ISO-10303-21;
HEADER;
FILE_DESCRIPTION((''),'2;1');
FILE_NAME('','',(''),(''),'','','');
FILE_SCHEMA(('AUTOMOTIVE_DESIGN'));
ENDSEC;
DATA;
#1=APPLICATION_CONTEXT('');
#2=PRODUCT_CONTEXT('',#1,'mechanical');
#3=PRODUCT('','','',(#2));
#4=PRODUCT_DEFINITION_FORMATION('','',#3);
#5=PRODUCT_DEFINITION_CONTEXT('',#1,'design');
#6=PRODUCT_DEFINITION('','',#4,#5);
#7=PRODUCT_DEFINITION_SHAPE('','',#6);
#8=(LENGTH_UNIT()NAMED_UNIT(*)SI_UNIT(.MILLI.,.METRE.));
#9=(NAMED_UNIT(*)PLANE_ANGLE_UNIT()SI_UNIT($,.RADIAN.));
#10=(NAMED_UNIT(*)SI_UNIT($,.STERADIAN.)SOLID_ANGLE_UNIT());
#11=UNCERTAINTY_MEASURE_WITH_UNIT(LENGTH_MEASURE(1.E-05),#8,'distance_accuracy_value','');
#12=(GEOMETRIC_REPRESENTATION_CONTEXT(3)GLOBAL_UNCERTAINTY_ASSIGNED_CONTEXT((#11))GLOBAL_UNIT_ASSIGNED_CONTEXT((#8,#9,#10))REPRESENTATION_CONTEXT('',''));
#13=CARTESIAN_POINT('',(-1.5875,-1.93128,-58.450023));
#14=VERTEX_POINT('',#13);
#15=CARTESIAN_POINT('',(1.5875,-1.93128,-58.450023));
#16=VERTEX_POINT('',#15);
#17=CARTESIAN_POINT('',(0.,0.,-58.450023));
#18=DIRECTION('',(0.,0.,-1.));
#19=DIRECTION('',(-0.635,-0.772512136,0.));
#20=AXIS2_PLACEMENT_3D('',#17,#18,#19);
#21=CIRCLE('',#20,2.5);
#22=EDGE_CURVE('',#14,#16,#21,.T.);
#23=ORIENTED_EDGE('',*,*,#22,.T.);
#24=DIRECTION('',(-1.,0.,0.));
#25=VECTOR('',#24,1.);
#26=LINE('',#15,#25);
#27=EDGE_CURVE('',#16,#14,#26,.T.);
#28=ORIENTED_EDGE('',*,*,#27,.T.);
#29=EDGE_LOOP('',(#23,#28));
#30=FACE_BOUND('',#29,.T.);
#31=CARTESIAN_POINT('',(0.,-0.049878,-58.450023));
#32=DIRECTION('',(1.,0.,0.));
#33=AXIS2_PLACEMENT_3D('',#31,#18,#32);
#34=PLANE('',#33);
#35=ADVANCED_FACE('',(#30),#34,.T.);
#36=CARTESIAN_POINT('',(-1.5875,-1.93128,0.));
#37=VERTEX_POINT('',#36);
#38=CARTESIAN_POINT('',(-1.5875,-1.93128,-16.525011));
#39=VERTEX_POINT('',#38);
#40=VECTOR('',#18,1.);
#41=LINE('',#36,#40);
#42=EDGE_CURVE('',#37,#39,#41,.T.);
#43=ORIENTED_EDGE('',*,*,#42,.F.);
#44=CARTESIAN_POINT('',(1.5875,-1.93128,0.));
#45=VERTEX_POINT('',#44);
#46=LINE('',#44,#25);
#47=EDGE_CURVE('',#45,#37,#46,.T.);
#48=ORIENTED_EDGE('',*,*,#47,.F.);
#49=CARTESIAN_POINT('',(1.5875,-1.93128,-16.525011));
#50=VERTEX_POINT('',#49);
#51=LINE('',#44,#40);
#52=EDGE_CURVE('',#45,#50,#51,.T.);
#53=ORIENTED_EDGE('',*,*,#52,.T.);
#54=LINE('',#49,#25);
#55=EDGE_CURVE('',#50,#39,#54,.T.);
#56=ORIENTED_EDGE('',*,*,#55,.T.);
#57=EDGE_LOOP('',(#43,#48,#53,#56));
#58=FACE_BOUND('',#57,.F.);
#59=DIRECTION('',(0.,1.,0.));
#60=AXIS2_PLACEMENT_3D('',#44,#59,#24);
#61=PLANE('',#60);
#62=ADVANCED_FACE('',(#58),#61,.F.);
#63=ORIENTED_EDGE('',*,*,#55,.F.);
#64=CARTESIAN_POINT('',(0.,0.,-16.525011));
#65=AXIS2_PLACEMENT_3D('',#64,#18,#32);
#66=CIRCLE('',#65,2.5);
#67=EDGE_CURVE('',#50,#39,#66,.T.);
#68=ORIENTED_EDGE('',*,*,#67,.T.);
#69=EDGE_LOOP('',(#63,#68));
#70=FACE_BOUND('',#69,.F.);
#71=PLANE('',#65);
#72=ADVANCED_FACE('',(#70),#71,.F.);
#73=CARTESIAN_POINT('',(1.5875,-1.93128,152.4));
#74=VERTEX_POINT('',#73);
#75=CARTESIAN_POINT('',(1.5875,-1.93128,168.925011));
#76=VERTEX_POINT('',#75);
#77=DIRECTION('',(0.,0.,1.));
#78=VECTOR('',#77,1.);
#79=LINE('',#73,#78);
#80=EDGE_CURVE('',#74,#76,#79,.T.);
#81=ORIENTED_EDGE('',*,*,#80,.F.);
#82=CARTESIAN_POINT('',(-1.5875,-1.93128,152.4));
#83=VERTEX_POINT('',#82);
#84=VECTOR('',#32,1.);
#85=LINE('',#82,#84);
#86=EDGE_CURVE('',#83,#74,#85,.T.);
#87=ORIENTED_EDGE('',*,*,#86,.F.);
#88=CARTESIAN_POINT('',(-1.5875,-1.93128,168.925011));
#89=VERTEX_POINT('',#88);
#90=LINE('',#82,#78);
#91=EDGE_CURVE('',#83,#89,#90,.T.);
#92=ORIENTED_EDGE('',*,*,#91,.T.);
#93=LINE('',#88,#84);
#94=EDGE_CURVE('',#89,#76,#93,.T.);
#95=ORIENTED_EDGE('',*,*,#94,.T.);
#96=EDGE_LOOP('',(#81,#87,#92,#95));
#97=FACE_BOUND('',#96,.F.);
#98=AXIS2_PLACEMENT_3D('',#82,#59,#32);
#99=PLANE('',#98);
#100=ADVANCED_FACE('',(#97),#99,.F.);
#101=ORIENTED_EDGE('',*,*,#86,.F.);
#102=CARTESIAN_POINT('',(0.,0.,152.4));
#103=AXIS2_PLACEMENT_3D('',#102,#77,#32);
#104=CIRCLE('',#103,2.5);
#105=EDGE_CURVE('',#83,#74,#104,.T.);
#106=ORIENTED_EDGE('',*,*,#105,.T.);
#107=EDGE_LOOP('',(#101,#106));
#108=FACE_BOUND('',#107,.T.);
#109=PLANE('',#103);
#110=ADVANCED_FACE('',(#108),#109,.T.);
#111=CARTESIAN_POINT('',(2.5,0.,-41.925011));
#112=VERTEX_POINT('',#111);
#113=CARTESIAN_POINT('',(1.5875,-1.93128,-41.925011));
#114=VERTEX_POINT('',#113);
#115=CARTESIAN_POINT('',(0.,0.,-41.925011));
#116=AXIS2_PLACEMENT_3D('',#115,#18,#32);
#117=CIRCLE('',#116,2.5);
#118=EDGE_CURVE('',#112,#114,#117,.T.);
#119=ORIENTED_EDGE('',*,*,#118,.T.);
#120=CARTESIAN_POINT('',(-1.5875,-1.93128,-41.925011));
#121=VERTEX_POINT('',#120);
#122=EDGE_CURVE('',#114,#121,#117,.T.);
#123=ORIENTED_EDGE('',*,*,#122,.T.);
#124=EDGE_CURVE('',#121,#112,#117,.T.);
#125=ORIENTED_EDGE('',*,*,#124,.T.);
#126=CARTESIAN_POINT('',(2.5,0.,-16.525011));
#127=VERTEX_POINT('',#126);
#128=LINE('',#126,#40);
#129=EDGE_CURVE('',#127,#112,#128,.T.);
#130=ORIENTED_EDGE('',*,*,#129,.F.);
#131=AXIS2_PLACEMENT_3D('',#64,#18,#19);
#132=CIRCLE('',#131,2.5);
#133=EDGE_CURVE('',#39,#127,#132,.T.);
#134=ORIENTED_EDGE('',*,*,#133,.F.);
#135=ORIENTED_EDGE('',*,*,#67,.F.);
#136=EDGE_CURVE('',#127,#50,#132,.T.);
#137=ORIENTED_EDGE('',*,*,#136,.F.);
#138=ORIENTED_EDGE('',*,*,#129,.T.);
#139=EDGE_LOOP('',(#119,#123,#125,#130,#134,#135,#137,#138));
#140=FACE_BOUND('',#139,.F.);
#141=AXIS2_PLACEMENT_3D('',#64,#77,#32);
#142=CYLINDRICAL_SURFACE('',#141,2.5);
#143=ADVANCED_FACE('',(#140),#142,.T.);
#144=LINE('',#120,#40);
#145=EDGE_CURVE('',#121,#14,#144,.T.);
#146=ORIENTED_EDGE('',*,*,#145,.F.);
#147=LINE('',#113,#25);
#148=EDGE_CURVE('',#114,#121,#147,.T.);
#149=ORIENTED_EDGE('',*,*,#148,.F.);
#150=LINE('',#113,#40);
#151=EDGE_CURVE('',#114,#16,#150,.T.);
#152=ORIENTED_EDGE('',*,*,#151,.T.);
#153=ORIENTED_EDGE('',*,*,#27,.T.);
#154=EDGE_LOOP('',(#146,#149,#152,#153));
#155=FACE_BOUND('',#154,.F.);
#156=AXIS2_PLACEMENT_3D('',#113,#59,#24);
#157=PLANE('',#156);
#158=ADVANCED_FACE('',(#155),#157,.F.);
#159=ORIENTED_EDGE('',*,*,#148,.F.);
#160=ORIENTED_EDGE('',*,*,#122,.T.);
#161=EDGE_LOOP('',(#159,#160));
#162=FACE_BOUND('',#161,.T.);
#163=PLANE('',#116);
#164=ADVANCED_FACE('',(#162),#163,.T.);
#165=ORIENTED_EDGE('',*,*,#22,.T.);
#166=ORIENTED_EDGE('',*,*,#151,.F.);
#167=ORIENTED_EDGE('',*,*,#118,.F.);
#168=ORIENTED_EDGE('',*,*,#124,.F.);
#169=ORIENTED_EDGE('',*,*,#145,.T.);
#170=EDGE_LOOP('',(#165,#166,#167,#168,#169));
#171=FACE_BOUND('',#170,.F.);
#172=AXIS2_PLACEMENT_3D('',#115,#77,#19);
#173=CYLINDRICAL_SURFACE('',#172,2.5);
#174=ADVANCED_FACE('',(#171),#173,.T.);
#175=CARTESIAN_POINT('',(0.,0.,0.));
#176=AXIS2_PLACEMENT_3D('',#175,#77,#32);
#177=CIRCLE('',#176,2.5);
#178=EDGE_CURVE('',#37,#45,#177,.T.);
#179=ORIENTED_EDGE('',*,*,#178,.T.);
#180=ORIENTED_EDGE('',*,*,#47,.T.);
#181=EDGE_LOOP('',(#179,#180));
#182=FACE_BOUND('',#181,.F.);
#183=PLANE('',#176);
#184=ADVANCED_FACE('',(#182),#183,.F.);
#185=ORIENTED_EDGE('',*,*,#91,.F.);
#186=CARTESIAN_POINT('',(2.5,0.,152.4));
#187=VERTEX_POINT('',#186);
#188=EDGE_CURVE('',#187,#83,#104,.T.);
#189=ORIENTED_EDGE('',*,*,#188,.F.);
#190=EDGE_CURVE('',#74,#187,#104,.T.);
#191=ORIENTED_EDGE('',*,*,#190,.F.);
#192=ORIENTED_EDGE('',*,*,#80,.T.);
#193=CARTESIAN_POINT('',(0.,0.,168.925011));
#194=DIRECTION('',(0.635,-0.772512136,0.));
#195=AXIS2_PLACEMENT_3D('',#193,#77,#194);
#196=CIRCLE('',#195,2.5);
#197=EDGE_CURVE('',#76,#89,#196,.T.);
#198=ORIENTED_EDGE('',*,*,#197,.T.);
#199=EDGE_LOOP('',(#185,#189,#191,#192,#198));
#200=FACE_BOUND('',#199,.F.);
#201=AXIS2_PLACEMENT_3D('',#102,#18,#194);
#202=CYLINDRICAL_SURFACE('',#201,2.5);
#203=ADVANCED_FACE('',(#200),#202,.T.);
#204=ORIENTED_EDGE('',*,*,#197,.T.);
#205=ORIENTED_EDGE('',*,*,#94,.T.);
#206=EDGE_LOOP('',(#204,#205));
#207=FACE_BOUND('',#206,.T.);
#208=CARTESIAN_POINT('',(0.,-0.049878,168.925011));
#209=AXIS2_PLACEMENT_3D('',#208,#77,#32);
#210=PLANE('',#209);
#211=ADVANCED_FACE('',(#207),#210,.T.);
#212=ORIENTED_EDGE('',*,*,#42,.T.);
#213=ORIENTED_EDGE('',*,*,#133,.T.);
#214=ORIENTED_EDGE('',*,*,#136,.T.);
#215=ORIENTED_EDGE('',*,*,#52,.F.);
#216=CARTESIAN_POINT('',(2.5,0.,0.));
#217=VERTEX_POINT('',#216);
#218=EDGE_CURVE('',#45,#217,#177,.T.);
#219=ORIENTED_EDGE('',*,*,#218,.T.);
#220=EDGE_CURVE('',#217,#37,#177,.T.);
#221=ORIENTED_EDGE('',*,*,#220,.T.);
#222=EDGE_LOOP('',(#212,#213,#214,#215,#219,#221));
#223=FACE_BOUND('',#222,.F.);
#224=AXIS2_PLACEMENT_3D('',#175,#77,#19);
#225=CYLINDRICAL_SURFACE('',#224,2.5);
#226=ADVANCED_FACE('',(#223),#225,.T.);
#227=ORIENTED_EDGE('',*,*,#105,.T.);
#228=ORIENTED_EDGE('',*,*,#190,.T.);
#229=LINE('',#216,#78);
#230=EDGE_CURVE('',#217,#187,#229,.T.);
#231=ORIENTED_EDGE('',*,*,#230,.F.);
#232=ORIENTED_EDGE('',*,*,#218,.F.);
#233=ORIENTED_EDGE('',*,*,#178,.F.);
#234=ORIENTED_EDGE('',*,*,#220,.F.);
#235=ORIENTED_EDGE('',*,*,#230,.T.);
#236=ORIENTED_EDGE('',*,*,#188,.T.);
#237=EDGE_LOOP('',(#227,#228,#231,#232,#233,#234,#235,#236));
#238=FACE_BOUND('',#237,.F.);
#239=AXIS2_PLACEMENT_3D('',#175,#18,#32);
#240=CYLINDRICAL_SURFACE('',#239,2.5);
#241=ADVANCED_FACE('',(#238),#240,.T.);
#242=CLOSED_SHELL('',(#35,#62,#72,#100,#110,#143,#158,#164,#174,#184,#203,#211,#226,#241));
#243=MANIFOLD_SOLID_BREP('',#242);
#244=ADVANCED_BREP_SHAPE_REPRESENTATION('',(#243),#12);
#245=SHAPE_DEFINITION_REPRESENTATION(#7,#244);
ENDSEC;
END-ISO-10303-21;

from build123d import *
from build123d import SkipClean  # not in build123d's __all__

# Parameters (mm, degrees)
F0_R     = 2.5
F1_DEPTH = 152.4
F3_DEPTH = 16.5250114
F5_DEPTH = 16.5250114
F6_R     = 2.5
F7_DEPTH = 25.4
F9_DEPTH = 16.5250114


# Not quite as in the source:
# - after a boolean that leaves OpenCascade's solid faulty, fix() repairs it


with BuildPart() as f1:
    # F0 (on Top) → F1 (new body)
    with BuildSketch(Plane.XY):
        Circle(F0_R)
    extrude(amount=F1_DEPTH)

    # F2 (on face) → F3 (join)
    with BuildSketch(Plane.XY.offset(152.4)):
        with BuildLine():
            Line((0, -1.9312803396), (1.5875, -1.9312803396))
            ThreePointArc((1.5875, -1.9312803396), (0, 2.5), (-1.5875, -1.9312803396))
            Line((-1.5875, -1.9312803396), (0, -1.9312803396))
        make_face()
    extrude(amount=F3_DEPTH)

    # F4 (on face) → F5 (join)
    with BuildSketch(Plane(origin=(0, 0, 0), x_dir=(1, 0, 0), z_dir=(0, 0, -1))):
        with BuildLine():
            Line((1.5875, 1.9312803396), (-1.5875, 1.9312803396))
            ThreePointArc((-1.5875, 1.9312803396), (0, -2.5), (1.5875, 1.9312803396))
        make_face()
    with SkipClean():  # cleaning this boolean's faces spoils the solid; the shape is the same uncleaned
        extrude(amount=F5_DEPTH)

    # F6 (on face) → F7 (join)
    with BuildSketch(Plane(origin=(0, 0, -16.5250114), x_dir=(1, 0, 0), z_dir=(0, 0, -1))):
        Circle(F6_R)
    extrude(amount=F7_DEPTH)

    add(f1.part.fix(), mode=Mode.REPLACE)

    # F8 (on face) → F9 (join)
    with BuildSketch(Plane(origin=(0, 0, -41.9250114), x_dir=(1, 0, 0), z_dir=(0, 0, -1))):
        with BuildLine():
            Line((1.5875, 1.9312803396), (-1.5875, 1.9312803396))
            ThreePointArc((-1.5875, 1.9312803396), (0, -2.5), (1.5875, 1.9312803396))
        make_face()
    extrude(amount=F9_DEPTH)


solid = f1.part
